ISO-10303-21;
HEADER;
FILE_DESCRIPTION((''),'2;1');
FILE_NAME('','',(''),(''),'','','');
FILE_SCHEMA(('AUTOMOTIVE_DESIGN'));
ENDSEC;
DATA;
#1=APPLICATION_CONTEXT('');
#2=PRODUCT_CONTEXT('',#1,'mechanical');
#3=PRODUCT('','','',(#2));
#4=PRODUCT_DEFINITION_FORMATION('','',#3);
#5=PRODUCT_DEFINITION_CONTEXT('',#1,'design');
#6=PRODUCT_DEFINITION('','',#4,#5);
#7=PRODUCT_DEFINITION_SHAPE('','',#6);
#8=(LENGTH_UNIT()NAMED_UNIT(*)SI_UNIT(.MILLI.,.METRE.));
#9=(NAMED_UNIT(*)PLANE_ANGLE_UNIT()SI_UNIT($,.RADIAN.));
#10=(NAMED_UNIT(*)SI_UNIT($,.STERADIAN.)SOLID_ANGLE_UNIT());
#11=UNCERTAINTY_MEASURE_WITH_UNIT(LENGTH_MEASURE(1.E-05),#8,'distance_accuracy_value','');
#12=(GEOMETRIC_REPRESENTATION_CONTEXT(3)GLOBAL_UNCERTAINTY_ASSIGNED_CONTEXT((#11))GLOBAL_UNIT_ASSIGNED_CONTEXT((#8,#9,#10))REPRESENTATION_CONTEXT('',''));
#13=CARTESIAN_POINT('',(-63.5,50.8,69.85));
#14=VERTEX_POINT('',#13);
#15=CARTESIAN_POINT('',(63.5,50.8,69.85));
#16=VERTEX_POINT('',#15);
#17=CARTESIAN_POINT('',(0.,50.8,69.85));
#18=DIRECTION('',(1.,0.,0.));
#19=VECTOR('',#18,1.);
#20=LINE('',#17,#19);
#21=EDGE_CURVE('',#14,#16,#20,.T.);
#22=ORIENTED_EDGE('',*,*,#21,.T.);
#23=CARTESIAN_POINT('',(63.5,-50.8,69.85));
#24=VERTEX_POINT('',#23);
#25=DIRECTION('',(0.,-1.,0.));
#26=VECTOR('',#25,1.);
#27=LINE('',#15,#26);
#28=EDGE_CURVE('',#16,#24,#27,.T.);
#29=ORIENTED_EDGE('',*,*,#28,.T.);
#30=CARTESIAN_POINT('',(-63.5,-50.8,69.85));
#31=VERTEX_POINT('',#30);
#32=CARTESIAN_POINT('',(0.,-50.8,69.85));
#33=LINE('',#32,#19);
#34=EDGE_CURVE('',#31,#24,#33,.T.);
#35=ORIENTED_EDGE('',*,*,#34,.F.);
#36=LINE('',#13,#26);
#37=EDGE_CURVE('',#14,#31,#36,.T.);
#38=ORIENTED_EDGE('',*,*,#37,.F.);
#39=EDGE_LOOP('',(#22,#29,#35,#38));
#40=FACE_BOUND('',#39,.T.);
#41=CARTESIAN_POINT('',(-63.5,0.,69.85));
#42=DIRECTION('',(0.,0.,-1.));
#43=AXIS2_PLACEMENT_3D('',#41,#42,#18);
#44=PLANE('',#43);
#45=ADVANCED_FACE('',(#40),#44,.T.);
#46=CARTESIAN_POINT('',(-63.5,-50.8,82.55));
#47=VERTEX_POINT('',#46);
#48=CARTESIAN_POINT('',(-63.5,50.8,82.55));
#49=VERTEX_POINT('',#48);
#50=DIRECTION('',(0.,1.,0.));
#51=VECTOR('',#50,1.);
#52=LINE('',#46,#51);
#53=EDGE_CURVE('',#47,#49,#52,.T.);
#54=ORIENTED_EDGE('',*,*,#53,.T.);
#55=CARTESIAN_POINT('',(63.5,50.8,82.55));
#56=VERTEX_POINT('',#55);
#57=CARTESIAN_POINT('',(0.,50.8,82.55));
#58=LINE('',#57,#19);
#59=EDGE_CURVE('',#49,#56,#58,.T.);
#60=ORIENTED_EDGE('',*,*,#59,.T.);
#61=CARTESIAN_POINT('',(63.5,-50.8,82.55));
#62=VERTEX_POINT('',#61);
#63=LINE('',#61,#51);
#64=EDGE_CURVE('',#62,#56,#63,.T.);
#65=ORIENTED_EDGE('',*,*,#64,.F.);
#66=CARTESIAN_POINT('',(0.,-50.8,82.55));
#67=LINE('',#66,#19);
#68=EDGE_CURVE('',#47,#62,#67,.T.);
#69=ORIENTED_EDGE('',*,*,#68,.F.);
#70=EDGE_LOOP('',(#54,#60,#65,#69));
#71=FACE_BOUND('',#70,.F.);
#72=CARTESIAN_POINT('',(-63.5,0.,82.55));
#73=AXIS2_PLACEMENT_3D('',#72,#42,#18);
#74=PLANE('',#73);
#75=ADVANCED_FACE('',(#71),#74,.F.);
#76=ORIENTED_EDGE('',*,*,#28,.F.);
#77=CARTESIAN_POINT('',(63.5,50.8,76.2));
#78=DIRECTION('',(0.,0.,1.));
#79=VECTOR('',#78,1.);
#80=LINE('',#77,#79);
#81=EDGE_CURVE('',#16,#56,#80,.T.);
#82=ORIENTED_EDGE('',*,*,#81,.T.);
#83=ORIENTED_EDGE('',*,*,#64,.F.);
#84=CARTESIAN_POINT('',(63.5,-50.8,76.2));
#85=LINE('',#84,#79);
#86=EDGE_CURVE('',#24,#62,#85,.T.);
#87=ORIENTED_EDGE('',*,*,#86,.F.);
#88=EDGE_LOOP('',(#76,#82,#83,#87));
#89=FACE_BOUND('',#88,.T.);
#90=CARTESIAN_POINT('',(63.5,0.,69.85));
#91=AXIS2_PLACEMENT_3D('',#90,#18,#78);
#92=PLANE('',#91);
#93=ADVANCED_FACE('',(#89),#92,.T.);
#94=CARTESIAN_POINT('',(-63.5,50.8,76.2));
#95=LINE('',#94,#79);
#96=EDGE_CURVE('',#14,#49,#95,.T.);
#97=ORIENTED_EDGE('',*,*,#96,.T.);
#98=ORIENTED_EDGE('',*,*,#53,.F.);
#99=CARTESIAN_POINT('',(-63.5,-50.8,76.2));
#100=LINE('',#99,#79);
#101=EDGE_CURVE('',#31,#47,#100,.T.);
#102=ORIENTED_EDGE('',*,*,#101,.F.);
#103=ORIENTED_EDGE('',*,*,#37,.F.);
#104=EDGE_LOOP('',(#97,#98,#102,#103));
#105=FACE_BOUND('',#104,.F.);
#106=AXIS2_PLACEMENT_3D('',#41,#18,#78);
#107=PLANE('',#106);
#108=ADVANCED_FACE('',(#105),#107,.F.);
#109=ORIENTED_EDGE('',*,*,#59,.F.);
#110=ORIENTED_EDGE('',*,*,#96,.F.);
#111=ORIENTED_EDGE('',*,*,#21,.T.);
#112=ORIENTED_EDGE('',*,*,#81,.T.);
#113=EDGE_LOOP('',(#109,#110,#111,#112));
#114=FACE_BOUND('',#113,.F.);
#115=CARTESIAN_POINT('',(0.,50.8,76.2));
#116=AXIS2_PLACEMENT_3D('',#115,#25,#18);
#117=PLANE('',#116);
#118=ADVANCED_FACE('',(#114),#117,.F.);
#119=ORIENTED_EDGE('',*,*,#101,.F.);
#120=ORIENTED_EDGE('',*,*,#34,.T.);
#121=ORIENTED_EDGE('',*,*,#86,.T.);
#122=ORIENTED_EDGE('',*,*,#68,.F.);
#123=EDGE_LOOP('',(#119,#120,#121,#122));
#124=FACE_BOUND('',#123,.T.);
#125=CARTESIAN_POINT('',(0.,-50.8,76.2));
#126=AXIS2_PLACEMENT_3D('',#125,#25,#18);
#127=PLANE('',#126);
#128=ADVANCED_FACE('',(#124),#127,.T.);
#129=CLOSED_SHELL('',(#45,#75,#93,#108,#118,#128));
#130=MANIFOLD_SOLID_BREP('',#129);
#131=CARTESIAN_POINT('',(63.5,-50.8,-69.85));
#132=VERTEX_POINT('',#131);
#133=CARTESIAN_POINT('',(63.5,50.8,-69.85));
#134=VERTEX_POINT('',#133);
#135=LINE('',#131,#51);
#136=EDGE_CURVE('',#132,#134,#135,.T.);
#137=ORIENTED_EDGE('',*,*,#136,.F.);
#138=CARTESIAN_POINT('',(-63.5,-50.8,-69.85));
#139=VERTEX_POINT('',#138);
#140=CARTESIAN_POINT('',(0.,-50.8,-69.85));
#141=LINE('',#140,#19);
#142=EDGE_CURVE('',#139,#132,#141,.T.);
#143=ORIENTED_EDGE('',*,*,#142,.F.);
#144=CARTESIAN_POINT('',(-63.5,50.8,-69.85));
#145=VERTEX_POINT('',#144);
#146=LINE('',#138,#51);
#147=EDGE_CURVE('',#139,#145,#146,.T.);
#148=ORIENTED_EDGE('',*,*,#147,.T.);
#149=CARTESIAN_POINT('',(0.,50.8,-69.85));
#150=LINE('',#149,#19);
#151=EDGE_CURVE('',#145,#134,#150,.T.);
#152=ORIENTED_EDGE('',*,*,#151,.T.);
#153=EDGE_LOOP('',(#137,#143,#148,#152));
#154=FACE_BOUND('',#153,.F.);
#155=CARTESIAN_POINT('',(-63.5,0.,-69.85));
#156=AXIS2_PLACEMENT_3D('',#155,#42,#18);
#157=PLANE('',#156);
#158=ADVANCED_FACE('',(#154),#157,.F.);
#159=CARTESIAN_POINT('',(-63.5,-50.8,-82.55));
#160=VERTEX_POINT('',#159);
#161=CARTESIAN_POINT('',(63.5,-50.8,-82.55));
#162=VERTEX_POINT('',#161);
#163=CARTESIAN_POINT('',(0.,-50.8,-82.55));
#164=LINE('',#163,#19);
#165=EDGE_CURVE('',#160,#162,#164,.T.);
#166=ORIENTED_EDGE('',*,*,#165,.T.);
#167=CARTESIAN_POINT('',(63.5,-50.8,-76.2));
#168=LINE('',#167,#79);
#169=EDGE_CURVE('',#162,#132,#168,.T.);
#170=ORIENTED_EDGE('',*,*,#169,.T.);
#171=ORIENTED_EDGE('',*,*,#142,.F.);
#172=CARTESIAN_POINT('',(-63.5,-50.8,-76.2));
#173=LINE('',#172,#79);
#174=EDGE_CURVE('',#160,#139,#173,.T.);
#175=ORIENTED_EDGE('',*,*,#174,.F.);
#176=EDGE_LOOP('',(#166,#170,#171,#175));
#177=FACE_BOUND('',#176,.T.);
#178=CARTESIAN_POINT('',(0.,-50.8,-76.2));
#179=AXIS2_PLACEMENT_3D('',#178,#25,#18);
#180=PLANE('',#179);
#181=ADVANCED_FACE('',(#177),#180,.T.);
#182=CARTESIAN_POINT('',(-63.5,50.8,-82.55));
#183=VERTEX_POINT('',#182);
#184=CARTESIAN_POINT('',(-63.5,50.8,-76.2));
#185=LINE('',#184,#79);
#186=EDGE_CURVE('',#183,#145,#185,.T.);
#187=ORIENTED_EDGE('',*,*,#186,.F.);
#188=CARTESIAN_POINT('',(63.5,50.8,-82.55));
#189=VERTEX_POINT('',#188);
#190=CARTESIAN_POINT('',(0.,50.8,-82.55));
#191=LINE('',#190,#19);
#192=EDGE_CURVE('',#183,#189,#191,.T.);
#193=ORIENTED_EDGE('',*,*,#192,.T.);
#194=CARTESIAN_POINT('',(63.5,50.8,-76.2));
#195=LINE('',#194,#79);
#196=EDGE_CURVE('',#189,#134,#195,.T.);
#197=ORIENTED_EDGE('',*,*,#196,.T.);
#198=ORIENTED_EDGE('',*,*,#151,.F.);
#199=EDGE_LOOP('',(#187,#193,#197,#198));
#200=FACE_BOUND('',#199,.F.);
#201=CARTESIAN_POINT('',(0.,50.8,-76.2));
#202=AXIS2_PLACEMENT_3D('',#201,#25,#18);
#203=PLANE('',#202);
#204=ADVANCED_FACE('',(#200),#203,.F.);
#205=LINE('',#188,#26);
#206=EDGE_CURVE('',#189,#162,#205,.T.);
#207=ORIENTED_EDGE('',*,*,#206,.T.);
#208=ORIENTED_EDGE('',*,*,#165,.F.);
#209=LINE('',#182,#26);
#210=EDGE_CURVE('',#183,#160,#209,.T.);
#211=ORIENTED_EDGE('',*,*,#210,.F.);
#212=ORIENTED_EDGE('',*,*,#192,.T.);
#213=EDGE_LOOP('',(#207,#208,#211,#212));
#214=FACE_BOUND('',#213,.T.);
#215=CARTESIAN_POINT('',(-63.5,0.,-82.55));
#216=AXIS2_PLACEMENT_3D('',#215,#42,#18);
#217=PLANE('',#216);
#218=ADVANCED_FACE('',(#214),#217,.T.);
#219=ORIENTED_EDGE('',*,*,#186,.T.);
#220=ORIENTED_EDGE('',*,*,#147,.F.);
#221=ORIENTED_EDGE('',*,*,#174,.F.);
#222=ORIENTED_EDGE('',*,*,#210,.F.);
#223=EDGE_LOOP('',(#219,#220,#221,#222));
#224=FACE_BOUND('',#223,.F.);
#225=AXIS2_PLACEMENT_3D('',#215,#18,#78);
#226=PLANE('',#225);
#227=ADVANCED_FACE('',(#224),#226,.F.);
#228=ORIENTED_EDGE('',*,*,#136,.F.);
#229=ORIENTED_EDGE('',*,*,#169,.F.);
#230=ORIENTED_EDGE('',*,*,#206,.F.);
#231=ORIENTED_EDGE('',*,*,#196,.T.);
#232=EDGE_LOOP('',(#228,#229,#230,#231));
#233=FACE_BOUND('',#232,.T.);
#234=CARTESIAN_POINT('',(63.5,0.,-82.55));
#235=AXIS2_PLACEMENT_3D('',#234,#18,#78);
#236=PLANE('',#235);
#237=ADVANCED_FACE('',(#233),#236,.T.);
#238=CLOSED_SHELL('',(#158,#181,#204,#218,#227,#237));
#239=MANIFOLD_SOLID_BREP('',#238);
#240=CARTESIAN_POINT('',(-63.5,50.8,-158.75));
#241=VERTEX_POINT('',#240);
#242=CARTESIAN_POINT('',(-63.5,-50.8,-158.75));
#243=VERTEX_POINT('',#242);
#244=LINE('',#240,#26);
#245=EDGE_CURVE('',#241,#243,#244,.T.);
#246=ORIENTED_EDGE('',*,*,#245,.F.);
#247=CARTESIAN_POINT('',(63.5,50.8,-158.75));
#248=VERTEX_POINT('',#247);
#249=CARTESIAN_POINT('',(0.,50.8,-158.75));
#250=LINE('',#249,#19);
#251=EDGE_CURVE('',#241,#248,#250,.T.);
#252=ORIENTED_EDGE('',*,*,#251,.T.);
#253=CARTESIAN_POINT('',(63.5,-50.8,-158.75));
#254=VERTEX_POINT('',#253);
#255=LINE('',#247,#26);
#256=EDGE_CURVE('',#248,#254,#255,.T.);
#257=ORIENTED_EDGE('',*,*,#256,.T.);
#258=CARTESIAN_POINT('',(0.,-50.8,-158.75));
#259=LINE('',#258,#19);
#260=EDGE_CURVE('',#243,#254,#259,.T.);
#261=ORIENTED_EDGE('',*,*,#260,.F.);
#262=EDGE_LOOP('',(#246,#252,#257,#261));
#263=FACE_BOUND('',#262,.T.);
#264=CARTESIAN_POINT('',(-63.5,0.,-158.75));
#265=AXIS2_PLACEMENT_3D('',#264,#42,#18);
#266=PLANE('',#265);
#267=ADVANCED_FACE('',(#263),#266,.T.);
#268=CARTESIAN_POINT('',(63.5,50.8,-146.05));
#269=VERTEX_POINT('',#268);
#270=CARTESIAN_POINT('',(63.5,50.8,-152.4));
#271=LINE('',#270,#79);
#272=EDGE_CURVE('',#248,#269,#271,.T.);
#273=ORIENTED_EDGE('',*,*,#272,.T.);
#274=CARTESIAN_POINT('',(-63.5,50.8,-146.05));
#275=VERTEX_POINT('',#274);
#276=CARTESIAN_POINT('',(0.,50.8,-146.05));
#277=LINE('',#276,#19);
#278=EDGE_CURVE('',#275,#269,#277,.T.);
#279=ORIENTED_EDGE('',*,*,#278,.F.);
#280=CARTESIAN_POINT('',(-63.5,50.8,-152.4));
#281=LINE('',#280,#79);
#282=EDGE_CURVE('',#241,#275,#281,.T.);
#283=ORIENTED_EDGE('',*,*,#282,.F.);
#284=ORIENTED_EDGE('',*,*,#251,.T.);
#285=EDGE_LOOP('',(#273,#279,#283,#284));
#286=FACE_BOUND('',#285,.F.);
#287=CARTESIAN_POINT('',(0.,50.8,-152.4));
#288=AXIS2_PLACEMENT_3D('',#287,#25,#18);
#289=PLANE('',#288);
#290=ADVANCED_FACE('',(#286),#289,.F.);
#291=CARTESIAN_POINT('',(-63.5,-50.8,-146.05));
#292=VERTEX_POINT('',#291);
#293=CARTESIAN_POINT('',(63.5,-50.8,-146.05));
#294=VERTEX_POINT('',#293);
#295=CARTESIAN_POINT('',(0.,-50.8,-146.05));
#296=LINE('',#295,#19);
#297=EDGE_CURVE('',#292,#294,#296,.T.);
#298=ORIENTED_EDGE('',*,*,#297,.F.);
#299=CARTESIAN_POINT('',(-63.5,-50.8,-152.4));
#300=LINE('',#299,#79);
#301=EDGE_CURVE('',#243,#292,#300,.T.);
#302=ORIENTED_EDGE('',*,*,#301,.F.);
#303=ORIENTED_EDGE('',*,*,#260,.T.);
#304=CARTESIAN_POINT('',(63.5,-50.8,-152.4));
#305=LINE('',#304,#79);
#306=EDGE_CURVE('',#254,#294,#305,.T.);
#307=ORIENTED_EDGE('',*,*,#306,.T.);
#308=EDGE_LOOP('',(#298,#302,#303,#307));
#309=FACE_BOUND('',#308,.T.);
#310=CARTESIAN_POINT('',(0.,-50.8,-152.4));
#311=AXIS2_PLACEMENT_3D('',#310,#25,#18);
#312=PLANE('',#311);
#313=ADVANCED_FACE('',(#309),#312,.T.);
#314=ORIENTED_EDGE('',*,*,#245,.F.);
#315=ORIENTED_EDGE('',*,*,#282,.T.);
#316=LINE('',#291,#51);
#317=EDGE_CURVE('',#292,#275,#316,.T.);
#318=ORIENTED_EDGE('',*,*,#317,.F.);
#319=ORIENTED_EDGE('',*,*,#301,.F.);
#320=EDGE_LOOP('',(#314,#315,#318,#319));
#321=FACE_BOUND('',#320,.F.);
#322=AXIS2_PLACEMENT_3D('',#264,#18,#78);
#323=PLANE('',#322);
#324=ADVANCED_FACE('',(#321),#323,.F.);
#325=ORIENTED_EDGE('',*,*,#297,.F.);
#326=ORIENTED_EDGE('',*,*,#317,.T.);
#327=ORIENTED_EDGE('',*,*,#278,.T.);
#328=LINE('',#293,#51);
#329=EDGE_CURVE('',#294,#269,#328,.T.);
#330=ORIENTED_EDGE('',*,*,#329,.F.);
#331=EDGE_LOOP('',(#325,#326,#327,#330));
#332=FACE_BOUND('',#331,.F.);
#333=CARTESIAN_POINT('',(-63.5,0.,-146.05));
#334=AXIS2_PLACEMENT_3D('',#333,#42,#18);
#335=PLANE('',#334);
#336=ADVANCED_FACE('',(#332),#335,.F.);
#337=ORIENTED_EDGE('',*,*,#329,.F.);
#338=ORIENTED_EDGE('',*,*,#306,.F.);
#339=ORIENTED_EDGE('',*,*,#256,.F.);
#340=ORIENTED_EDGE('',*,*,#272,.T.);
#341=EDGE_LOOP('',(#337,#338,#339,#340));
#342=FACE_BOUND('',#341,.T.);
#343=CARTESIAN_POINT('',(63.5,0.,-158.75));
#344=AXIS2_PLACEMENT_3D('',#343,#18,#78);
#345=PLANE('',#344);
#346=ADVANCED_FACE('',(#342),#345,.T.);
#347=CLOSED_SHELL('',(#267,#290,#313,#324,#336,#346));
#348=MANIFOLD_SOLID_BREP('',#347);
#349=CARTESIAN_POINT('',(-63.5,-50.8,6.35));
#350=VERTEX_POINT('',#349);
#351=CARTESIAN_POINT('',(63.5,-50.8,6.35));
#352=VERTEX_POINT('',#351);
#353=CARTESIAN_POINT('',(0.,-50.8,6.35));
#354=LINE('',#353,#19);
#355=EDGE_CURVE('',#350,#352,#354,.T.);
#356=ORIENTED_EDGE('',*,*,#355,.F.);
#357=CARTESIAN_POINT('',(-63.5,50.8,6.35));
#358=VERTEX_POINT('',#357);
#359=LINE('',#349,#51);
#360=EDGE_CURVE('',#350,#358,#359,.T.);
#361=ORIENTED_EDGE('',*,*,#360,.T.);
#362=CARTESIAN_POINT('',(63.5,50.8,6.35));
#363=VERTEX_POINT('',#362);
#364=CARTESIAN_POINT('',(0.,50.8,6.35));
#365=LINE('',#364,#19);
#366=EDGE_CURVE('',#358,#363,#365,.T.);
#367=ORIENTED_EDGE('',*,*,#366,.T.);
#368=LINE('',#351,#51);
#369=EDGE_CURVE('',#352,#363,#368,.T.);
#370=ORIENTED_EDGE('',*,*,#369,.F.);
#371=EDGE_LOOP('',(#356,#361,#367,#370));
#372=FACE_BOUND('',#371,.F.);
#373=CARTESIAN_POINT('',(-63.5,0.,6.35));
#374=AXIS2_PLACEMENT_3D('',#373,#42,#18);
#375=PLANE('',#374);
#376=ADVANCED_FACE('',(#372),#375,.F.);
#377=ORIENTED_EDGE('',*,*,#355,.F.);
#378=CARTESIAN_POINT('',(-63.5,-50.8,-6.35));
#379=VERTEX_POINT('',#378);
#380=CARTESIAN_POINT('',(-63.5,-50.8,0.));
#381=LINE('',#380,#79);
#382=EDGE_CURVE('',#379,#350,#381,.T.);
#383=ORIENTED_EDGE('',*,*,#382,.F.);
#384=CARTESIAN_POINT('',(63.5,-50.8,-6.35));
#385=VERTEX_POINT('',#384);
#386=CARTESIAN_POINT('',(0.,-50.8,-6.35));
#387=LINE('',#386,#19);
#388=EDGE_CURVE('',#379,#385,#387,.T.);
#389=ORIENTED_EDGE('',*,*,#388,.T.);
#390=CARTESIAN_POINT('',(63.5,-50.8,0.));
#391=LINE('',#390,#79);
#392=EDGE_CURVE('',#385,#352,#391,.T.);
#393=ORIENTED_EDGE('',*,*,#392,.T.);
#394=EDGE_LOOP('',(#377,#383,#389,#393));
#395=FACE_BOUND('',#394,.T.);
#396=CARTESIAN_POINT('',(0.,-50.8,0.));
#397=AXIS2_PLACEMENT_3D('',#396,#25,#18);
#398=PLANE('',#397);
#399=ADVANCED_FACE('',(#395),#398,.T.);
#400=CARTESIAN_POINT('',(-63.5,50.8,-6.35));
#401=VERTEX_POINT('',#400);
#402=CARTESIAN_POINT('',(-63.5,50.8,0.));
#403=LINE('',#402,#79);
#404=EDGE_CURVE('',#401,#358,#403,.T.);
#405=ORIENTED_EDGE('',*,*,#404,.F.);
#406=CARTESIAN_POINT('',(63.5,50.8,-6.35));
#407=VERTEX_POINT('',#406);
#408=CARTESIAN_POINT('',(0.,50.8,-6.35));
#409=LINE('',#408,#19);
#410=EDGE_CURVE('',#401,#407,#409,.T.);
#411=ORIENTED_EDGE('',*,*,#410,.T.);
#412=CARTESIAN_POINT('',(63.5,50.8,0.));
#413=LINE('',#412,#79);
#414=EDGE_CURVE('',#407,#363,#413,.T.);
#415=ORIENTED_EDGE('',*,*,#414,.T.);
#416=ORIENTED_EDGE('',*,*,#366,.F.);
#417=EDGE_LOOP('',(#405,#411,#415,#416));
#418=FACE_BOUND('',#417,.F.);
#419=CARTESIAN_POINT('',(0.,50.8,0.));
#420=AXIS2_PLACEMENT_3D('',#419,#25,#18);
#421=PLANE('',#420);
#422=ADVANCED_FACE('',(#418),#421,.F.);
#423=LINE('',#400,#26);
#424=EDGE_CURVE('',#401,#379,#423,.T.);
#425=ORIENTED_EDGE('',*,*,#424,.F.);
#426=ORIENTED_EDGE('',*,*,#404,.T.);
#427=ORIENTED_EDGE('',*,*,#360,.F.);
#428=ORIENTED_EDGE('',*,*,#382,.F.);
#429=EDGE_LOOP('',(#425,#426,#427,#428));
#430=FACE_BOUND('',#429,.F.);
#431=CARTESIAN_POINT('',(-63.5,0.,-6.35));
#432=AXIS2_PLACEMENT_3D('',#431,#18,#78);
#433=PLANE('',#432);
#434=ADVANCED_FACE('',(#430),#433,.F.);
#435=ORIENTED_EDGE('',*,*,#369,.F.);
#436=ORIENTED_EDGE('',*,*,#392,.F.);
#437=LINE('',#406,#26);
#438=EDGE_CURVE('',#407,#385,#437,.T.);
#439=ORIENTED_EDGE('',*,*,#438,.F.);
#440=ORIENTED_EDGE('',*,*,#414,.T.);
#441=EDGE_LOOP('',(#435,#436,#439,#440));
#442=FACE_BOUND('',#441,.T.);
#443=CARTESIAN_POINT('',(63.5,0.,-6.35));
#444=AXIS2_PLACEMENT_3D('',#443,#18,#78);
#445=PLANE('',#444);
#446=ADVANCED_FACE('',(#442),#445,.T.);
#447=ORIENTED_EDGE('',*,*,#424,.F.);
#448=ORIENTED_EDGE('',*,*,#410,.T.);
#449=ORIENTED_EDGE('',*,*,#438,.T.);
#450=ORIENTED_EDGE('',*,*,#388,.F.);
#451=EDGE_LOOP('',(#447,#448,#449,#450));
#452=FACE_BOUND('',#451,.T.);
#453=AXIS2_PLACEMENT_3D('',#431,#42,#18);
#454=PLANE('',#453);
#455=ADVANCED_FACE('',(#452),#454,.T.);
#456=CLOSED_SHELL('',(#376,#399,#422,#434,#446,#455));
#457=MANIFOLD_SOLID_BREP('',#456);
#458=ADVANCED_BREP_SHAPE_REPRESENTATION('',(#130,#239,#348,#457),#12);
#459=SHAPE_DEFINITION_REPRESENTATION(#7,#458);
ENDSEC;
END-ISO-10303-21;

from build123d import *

# Parameters (mm, degrees)
F0_W     = 127
F0_H     = 12.7
F1_DEPTH = 50.8


# Not quite as in the source:
# - the program builds the solid bodies; features that only make, move or delete a surface that nothing else refers to are left out


with BuildPart() as f1:
    # F0 (on Front) → F1 (new body, symmetric)
    with BuildSketch(Plane.XZ):
        with Locations((0, 76.2)):
            Rectangle(F0_W, F0_H)
    extrude(amount=F1_DEPTH, both=True)


with BuildPart() as f1b:
    # F0 (on Front) → F1, piece 2 (new body, symmetric)
    with BuildSketch(Plane.XZ):
        Rectangle(F0_W, F0_H)
    extrude(amount=F1_DEPTH, both=True)


with BuildPart() as f1c:
    # F0 (on Front) → F1, piece 3 (new body, symmetric)
    with BuildSketch(Plane.XZ):
        with Locations((0, -76.2)):
            Rectangle(F0_W, F0_H)
    extrude(amount=F1_DEPTH, both=True)


with BuildPart() as f1d:
    # F0 (on Front) → F1, piece 4 (new body, symmetric)
    with BuildSketch(Plane.XZ):
        with Locations((0, -152.4)):
            Rectangle(F0_W, F0_H)
    extrude(amount=F1_DEPTH, both=True)


solid = Compound([f1.part, f1b.part, f1c.part, f1d.part])
